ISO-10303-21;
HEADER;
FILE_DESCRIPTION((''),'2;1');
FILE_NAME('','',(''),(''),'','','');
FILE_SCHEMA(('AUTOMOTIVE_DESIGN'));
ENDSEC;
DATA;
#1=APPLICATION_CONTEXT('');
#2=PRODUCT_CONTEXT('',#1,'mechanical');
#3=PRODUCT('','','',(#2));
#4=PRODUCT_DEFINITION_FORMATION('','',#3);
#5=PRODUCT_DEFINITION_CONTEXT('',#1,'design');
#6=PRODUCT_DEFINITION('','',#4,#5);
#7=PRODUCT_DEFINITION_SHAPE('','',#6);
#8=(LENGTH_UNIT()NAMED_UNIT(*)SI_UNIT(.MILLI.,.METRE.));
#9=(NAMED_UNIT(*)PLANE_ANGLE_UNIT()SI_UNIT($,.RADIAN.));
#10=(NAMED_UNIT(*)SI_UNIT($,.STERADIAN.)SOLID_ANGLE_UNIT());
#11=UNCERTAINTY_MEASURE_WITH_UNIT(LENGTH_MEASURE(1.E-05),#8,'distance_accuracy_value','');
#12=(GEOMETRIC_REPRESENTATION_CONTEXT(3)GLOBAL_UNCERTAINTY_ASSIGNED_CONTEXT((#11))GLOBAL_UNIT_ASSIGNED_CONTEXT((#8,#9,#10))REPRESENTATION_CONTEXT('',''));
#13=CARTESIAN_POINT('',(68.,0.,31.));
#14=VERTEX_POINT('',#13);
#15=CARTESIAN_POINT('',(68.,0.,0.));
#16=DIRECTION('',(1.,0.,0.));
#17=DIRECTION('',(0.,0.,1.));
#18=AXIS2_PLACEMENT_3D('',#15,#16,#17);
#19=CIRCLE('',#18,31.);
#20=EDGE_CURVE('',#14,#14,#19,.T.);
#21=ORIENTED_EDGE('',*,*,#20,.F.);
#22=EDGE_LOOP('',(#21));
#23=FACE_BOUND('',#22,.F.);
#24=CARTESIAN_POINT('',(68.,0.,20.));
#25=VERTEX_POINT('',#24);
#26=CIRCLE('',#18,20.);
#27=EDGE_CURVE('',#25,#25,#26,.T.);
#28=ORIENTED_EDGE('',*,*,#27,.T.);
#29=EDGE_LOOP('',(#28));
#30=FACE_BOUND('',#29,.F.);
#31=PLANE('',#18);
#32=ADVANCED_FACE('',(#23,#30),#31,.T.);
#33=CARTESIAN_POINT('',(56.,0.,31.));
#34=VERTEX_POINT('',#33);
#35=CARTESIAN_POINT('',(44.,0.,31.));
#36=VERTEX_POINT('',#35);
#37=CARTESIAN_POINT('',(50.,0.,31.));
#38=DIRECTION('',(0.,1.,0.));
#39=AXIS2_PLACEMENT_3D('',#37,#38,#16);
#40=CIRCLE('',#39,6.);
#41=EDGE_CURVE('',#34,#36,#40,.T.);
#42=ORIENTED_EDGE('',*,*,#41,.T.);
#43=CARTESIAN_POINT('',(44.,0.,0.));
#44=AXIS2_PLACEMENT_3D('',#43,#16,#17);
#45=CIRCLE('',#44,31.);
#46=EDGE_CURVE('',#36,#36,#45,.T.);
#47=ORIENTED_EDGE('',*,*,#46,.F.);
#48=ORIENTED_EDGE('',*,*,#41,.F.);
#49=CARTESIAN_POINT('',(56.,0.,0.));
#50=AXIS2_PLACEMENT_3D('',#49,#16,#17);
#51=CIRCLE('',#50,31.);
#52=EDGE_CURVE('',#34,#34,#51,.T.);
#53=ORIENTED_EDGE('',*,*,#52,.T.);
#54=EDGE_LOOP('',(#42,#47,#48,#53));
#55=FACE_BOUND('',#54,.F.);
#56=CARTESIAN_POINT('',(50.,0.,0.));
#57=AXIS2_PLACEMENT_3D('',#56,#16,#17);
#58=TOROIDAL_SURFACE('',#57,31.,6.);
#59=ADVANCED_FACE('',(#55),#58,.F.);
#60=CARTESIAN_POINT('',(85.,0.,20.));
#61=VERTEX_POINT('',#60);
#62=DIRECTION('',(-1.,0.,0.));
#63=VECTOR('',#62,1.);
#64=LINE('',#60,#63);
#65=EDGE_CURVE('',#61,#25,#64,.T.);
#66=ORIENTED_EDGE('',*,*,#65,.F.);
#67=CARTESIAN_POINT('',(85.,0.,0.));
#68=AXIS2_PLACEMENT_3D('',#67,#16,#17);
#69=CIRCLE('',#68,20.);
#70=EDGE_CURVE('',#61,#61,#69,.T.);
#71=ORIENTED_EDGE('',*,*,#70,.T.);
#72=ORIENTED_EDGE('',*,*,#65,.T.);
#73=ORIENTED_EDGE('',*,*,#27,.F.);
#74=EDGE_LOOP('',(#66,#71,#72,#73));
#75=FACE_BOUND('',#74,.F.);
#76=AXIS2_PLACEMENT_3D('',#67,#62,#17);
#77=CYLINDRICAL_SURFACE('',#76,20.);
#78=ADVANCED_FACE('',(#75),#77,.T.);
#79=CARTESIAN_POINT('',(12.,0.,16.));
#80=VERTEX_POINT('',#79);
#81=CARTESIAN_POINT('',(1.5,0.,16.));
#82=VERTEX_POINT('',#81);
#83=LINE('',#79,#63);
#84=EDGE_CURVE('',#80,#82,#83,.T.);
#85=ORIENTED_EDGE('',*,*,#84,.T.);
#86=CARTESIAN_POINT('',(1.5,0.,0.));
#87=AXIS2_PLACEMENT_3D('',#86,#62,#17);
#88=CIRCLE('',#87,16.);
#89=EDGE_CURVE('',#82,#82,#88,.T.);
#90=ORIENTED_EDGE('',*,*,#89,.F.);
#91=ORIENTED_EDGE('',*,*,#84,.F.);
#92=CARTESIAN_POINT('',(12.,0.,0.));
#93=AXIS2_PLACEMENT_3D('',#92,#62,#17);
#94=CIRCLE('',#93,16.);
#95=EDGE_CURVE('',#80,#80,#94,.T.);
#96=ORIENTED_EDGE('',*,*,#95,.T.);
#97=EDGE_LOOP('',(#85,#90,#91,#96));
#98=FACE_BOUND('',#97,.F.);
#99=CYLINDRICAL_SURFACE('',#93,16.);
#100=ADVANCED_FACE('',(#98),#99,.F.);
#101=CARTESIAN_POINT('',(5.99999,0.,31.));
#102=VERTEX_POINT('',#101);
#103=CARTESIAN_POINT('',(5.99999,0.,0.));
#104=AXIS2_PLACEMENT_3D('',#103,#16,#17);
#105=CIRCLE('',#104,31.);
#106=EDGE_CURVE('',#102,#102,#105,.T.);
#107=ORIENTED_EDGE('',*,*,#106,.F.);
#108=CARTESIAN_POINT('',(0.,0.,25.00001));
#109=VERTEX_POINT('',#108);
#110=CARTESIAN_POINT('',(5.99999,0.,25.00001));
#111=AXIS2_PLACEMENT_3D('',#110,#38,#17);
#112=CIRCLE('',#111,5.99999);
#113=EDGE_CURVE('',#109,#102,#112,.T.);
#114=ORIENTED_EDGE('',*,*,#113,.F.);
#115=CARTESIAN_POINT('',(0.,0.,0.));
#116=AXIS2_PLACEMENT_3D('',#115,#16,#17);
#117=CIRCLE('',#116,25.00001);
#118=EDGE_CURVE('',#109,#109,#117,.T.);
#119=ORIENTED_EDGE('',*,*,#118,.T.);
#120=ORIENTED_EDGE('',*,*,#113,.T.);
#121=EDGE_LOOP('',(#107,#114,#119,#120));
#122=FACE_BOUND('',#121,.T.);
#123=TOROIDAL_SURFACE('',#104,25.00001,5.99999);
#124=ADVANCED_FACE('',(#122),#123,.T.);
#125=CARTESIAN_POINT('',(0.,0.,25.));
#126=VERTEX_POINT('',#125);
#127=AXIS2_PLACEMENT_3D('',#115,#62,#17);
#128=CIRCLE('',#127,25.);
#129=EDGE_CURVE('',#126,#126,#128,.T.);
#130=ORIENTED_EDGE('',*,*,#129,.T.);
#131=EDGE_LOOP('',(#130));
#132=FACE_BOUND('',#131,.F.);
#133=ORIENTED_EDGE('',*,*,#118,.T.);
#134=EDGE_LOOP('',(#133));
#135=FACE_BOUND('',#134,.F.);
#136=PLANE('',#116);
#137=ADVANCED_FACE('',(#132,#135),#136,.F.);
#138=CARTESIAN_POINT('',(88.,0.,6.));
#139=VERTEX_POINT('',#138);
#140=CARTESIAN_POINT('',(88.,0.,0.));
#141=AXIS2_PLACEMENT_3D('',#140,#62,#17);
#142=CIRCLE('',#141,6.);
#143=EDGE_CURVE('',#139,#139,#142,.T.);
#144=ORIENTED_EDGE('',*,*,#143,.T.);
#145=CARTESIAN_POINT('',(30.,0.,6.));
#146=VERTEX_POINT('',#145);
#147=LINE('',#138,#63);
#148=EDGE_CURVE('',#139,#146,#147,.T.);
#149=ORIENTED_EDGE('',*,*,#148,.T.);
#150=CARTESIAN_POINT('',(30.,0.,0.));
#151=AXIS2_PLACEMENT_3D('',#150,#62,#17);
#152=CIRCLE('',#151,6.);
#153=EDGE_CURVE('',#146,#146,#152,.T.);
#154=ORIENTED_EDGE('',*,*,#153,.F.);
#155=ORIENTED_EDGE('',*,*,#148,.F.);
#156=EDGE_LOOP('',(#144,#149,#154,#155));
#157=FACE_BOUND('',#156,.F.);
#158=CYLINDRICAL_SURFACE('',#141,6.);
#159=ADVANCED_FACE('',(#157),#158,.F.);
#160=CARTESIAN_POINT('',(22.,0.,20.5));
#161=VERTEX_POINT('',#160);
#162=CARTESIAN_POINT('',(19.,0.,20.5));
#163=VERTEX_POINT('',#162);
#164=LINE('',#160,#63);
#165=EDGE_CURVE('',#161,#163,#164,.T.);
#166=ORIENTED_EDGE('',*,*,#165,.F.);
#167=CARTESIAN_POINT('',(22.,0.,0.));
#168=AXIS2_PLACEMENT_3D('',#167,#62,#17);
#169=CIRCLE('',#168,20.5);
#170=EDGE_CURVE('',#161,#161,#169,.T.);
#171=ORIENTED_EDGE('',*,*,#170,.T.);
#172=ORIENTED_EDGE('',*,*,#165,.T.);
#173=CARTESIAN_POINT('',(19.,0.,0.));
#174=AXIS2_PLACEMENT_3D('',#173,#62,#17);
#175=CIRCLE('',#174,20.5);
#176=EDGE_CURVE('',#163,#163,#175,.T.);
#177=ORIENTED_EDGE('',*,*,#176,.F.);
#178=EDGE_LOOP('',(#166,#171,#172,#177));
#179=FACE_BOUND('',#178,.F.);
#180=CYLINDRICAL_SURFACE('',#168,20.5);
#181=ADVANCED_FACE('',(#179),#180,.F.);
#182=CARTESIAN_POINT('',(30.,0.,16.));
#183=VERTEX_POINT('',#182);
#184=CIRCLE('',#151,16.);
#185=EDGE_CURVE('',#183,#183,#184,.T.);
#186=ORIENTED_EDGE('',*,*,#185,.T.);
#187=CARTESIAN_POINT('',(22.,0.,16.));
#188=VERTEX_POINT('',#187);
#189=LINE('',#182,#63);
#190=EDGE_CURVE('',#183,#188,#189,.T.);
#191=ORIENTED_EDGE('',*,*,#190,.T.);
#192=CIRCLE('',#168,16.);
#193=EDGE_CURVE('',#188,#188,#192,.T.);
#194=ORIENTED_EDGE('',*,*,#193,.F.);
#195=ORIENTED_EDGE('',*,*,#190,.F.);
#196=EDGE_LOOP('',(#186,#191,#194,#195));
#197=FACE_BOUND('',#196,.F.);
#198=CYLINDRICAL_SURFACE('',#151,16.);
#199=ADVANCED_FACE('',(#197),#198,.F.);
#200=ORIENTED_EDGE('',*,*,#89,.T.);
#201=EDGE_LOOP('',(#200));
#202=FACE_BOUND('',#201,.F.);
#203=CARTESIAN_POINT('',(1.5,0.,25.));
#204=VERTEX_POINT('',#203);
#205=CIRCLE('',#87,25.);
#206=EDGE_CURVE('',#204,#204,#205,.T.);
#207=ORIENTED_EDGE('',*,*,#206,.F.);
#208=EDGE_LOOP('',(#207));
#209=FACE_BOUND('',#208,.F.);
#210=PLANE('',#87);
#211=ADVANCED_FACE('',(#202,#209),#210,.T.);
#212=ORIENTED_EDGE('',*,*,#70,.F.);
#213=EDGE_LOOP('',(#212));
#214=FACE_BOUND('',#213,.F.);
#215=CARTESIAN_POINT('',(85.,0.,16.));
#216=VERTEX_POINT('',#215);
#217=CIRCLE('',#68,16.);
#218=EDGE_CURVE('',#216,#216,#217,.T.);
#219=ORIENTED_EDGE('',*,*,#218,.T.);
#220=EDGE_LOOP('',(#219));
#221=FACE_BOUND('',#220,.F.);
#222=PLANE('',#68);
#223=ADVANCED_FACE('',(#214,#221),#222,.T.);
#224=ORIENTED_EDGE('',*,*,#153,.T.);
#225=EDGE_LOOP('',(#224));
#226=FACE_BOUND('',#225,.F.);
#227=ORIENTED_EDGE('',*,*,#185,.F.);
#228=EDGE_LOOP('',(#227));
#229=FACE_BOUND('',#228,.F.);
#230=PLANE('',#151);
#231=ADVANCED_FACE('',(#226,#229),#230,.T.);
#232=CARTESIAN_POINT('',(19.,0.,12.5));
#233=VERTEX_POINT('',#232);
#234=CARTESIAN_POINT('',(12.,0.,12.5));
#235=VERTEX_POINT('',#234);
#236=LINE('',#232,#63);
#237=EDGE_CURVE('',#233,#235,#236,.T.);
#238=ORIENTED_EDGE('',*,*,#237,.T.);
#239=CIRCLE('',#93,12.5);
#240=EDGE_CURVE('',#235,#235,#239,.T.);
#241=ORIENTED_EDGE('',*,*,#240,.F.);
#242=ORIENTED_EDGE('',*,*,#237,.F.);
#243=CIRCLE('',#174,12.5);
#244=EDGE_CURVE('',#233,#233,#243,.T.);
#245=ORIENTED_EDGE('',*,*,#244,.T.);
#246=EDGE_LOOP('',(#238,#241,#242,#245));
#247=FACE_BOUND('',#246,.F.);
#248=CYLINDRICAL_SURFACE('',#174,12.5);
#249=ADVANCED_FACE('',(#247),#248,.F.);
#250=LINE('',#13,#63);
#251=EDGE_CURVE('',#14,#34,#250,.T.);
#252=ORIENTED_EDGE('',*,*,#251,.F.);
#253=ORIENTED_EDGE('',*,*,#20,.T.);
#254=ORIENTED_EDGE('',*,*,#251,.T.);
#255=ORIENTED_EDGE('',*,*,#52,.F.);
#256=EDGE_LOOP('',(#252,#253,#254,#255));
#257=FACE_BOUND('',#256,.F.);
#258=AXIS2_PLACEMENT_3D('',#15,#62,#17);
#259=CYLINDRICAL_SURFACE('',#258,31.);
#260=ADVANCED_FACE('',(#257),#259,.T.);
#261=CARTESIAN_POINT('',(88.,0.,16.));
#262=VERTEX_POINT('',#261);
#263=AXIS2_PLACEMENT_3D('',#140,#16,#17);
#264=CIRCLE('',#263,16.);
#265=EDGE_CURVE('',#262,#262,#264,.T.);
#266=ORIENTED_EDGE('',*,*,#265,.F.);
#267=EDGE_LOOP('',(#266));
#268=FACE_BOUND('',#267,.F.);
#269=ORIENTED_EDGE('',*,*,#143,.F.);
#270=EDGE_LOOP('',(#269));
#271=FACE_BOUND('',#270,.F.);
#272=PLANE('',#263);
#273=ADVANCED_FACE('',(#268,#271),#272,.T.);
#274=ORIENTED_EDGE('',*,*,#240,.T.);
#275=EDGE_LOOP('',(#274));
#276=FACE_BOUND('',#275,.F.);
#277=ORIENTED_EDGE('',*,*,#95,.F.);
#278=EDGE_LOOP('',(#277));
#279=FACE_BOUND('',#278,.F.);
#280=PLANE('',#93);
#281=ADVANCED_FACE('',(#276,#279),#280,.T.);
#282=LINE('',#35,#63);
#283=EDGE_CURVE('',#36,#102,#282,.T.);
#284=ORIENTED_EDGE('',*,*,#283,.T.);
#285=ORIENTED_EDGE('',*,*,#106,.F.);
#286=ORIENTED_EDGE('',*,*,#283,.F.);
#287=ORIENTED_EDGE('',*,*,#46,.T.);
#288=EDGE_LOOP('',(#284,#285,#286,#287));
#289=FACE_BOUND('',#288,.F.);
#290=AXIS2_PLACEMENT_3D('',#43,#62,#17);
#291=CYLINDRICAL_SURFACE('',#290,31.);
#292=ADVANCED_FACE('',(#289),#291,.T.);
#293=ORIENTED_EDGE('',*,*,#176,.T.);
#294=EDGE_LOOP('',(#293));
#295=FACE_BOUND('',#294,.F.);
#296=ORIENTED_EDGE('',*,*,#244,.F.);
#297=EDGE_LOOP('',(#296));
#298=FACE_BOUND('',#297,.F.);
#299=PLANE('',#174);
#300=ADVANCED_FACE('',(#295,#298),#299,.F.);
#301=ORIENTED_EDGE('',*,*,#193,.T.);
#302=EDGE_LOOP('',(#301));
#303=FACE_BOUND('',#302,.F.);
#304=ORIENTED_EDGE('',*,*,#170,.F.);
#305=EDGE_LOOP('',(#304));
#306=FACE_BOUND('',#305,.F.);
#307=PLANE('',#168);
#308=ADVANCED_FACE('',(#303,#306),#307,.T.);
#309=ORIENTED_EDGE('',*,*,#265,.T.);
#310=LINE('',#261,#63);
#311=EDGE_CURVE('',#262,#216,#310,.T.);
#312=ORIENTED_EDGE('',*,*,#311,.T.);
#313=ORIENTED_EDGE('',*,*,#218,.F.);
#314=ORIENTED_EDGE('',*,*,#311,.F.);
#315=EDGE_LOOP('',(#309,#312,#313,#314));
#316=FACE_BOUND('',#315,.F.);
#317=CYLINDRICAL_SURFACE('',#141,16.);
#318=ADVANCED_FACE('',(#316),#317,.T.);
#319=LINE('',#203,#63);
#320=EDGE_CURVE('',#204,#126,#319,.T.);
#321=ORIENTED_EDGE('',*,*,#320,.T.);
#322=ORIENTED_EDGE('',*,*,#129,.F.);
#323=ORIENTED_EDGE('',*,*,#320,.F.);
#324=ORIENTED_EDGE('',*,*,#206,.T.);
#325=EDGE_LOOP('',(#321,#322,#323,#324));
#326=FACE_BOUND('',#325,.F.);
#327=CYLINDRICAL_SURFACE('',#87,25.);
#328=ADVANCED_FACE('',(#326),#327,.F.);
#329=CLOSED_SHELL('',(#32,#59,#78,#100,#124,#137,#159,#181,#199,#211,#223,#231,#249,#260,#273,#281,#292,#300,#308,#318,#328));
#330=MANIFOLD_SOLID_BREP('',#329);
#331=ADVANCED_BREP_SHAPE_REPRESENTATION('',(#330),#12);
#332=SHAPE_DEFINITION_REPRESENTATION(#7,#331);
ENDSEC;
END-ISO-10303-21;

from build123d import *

# Parameters (mm, degrees)
F4_R = 5.99999


# Not quite as in the source:
# - a fillet or chamfer is up to 0.001 mm smaller than in the source, because OpenCascade refuses the exact size


with BuildPart() as f1:
    # F0 (on Front) → F1 (revolve)
    with BuildSketch(Plane.XZ):
        with BuildLine():
            Line((0, 31), (0, 0))
            Line((0, 0), (88, 0))
            Line((88, 0), (88, 16))
            Line((88, 16), (85, 16))
            Line((85, 16), (85, 20))
            Line((85, 20), (68, 20))
            Line((68, 20), (68, 31))
            Line((68, 31), (56, 31))
            ThreePointArc((56, 31), (50, 25), (44, 31))
            Line((44, 31), (0, 31))
        make_face()
    revolve(axis=Axis((68.2048197045, 0, 0), (1, 0, 0)))

    # F2 (on Front) → F3 (revolve, cut)
    with BuildSketch(Plane.XZ):
        Polygon((1.5, 25), (0, 25), (0, 0), (88, 0), (88, 6), (30, 6), (30, 16), (22, 16), (22, 20.5), (19, 20.5), (19, 12.5), (12, 12.5), (12, 16), (1.5, 16), align=None)
    revolve(axis=Axis((-8.4996176884, 0, 0), (-1, 0, 0)), mode=Mode.SUBTRACT)

    # F4 (radius 6 in the source; OpenCascade refuses exactly that, so slightly less here)
    f4_edges = [f1.edges().sort_by_distance(p)[0] for p in [
        (0, 0, -31),
    ]]
    fillet(f4_edges, radius=F4_R)


solid = f1.part
